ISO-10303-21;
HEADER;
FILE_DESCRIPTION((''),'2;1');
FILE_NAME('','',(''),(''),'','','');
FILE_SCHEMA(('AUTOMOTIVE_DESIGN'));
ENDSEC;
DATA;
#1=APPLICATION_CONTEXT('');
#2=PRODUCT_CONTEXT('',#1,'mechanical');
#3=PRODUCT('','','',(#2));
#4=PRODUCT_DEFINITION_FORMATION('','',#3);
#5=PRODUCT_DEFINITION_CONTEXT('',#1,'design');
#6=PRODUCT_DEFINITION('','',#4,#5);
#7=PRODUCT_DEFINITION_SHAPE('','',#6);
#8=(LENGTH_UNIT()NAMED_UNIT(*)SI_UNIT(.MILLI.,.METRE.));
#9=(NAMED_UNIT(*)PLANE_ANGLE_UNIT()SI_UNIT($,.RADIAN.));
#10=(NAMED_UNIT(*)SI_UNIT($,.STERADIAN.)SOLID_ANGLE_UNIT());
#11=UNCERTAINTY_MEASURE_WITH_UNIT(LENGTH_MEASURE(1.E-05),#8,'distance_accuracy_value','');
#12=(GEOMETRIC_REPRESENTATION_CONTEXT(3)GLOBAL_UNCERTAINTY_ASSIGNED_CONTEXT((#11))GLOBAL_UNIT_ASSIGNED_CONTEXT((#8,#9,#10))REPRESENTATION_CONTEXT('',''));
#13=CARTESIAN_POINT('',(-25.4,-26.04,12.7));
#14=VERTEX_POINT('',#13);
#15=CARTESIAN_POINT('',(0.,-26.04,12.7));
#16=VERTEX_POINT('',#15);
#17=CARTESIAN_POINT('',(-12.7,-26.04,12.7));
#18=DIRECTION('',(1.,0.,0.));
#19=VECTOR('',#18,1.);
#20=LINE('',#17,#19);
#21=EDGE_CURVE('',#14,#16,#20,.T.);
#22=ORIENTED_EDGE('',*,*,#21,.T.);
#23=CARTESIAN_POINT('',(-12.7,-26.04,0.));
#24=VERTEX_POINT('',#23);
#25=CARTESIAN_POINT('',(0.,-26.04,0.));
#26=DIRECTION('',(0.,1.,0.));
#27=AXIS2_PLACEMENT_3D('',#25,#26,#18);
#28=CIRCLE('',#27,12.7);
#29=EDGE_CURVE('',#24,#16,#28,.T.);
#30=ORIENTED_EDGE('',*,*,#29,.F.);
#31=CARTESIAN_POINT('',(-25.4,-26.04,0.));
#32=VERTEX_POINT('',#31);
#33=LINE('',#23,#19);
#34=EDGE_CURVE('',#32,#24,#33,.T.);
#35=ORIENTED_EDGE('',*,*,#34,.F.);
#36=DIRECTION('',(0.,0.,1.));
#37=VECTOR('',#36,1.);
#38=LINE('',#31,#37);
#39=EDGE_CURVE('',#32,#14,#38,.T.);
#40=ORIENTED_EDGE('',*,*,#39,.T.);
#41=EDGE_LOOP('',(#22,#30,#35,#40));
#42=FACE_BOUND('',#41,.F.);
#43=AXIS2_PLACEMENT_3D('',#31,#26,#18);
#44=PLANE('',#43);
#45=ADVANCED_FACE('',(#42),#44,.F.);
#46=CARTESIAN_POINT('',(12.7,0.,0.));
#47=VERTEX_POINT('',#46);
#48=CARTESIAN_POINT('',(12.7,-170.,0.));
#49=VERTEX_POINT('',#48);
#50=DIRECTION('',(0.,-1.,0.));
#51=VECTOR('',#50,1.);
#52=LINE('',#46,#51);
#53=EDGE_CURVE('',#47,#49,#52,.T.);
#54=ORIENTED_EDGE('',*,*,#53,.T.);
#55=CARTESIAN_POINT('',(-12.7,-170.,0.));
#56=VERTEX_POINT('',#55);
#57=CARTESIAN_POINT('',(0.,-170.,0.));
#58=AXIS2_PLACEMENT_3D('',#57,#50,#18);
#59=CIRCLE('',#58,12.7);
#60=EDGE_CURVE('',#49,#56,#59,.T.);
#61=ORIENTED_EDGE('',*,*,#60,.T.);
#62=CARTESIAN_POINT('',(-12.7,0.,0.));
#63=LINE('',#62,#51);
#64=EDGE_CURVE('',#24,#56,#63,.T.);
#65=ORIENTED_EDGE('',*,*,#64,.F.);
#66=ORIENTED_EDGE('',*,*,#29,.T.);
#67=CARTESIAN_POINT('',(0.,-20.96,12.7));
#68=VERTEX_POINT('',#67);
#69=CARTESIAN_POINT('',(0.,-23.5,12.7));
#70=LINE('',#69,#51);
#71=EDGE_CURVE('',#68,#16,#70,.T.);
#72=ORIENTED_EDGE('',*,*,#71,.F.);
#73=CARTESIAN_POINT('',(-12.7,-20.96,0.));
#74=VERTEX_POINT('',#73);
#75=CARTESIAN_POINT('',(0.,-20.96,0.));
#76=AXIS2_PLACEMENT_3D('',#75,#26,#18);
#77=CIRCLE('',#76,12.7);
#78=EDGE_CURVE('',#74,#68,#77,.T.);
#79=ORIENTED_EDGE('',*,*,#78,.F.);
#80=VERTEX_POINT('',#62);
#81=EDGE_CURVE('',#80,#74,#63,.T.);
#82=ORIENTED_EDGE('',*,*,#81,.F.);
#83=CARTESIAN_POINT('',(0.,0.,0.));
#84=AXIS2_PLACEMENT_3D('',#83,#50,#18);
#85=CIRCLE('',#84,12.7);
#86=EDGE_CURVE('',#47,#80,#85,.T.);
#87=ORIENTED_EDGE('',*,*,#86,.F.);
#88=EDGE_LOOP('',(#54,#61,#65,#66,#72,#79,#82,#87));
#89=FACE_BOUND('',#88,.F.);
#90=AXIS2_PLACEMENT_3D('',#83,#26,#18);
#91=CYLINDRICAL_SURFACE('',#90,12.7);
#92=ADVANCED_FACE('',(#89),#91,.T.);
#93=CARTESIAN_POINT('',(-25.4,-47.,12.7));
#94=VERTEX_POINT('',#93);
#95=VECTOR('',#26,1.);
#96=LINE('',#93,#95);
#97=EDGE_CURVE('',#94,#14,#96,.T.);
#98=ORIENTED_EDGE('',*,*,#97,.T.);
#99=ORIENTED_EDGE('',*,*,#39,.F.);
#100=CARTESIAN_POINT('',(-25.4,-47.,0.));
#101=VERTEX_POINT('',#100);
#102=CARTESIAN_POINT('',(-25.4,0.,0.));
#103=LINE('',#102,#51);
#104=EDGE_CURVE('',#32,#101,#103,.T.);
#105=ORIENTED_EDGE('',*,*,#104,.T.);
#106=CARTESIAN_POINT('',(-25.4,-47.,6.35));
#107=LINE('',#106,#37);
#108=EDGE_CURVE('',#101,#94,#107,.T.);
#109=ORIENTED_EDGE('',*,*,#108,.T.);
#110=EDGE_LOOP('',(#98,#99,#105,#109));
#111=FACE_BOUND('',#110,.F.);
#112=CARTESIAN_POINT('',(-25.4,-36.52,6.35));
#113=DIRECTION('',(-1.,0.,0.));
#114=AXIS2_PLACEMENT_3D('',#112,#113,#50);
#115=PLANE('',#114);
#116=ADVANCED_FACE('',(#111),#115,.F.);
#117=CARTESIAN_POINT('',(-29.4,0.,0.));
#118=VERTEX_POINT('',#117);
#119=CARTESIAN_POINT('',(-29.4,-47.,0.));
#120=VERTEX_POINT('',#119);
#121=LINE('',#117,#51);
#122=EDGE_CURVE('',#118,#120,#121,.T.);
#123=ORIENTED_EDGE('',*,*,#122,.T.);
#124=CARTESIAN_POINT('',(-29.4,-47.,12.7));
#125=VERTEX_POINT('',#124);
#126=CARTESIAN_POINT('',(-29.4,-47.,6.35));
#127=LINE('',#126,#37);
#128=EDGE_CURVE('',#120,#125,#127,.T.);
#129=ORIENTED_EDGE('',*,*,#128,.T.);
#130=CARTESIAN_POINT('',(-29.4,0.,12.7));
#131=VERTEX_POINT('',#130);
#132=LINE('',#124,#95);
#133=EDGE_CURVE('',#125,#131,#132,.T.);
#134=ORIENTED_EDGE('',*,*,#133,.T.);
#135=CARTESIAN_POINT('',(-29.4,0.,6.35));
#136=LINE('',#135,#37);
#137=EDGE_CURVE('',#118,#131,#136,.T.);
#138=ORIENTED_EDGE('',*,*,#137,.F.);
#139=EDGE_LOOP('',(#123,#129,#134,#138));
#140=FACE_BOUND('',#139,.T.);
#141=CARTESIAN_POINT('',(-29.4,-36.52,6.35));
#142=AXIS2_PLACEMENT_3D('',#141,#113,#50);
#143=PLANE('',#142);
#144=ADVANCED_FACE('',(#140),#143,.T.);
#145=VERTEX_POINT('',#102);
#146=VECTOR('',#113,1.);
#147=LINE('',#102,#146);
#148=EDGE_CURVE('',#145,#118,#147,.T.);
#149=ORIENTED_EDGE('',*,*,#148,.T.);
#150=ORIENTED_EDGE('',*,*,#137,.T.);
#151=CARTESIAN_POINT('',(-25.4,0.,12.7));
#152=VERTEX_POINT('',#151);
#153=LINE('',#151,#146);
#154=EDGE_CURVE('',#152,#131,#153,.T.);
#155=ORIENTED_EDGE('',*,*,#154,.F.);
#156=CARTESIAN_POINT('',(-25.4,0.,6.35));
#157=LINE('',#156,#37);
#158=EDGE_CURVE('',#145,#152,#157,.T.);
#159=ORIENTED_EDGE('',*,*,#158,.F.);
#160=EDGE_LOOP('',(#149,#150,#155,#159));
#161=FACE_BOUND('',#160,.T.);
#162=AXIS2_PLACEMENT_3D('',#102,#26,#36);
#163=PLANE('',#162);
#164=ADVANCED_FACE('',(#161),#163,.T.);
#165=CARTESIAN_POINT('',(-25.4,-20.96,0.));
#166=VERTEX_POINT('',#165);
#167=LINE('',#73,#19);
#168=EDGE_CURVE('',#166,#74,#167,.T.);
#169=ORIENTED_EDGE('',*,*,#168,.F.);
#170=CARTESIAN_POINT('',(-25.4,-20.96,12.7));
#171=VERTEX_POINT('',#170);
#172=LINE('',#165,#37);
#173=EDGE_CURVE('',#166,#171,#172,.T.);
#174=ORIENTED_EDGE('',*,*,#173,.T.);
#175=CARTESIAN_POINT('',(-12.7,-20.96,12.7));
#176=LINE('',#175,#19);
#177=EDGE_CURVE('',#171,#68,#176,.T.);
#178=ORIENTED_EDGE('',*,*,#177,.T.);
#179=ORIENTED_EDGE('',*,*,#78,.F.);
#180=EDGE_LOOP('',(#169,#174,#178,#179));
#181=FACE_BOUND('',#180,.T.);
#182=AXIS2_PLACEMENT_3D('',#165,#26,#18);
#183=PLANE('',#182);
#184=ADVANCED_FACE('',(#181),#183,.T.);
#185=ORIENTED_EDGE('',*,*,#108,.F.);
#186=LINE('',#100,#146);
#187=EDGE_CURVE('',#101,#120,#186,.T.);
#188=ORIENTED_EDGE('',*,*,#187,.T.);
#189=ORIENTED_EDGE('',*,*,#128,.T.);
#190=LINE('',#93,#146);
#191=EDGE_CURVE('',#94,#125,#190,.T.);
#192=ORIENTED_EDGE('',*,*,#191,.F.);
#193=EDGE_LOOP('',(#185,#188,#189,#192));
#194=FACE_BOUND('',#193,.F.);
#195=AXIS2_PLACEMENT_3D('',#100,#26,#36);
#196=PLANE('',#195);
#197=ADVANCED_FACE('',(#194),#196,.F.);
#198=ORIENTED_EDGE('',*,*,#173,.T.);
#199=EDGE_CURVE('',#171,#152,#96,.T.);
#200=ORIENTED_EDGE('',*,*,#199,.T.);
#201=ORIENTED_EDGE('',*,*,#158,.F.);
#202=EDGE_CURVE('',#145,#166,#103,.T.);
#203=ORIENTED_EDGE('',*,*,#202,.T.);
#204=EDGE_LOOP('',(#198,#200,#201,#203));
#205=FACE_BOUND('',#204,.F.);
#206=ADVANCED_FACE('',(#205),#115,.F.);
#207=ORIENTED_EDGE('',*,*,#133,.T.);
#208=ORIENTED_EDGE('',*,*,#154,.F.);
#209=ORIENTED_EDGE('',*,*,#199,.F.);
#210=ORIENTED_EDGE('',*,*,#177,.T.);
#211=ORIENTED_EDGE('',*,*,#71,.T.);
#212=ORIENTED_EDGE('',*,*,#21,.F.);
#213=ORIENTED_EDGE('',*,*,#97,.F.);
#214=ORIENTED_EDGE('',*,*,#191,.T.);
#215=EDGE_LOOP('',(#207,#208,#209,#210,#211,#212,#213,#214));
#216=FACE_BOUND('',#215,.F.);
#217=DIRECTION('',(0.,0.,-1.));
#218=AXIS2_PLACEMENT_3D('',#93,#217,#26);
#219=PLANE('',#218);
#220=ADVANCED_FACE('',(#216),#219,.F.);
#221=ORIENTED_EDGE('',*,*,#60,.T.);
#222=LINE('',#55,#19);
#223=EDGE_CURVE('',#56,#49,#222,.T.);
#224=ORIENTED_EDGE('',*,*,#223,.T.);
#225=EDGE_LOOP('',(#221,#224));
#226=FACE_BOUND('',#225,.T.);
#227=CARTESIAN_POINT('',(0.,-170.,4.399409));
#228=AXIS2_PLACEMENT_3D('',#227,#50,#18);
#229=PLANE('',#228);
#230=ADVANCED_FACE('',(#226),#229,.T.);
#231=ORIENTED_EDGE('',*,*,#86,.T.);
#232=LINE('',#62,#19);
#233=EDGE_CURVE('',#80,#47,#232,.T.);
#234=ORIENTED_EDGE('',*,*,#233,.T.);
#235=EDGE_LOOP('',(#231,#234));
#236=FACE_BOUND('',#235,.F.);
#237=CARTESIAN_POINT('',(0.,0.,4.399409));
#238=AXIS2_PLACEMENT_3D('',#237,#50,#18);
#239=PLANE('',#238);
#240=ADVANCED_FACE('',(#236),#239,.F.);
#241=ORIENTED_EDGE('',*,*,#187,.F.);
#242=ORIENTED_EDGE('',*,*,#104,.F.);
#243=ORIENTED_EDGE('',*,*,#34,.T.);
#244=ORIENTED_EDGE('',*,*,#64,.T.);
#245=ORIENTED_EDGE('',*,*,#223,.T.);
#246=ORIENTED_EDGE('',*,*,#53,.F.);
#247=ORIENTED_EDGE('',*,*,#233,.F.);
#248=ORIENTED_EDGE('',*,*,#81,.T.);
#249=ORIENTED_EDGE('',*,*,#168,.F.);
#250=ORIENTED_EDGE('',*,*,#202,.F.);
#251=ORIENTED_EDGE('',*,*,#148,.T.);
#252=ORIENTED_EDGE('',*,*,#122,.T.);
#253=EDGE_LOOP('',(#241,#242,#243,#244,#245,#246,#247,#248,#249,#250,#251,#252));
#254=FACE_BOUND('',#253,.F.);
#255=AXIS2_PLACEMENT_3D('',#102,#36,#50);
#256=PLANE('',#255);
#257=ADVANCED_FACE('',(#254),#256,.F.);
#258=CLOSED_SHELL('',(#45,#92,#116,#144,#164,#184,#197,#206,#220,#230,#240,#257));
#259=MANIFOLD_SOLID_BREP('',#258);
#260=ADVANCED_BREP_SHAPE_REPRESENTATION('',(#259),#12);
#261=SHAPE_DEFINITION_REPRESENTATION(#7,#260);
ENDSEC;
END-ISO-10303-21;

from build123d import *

# Parameters (mm, degrees)
F1_DEPTH = 170
F2_W     = 25.4
F2_H     = 5.08
F3_DEPTH = 12.7
F4_W     = 20.96
F4_H     = 12.7
F4_W_2   = 2.54
F5_DEPTH = 4


with BuildPart() as f1:
    # F0 (on Front) → F1 (new body)
    with BuildSketch(Plane.XZ):
        with BuildLine():
            Line((-12.7, 0), (12.7, 0))
            ThreePointArc((12.7, 0), (0, 12.7), (-12.7, 0))
        make_face()
    extrude(amount=F1_DEPTH)

    # F2 (on face) → F3 (join)
    with BuildSketch(Plane(origin=(0, 0, 0), x_dir=(1, 0, 0), z_dir=(0, 0, -1))):
        with Locations((-12.7, 23.5)):
            Rectangle(F2_W, F2_H)
    extrude(amount=-F3_DEPTH)

    # F4 (on face) → F5 (join)
    with BuildSketch(Plane(origin=(-25.4, 0, 0), x_dir=(0, -1, 0), z_dir=(-1, 0, 0))):
        with Locations((36.52, 6.35)):
            Rectangle(F4_W, F4_H)
        with Locations((10.48, 6.35)):
            Rectangle(F4_W, F4_H)
        with Locations((22.23, 6.35)):
            Rectangle(F4_W_2, F4_H)
        with Locations((24.77, 6.35)):
            Rectangle(F4_W_2, F4_H)
    extrude(amount=F5_DEPTH)


solid = f1.part
